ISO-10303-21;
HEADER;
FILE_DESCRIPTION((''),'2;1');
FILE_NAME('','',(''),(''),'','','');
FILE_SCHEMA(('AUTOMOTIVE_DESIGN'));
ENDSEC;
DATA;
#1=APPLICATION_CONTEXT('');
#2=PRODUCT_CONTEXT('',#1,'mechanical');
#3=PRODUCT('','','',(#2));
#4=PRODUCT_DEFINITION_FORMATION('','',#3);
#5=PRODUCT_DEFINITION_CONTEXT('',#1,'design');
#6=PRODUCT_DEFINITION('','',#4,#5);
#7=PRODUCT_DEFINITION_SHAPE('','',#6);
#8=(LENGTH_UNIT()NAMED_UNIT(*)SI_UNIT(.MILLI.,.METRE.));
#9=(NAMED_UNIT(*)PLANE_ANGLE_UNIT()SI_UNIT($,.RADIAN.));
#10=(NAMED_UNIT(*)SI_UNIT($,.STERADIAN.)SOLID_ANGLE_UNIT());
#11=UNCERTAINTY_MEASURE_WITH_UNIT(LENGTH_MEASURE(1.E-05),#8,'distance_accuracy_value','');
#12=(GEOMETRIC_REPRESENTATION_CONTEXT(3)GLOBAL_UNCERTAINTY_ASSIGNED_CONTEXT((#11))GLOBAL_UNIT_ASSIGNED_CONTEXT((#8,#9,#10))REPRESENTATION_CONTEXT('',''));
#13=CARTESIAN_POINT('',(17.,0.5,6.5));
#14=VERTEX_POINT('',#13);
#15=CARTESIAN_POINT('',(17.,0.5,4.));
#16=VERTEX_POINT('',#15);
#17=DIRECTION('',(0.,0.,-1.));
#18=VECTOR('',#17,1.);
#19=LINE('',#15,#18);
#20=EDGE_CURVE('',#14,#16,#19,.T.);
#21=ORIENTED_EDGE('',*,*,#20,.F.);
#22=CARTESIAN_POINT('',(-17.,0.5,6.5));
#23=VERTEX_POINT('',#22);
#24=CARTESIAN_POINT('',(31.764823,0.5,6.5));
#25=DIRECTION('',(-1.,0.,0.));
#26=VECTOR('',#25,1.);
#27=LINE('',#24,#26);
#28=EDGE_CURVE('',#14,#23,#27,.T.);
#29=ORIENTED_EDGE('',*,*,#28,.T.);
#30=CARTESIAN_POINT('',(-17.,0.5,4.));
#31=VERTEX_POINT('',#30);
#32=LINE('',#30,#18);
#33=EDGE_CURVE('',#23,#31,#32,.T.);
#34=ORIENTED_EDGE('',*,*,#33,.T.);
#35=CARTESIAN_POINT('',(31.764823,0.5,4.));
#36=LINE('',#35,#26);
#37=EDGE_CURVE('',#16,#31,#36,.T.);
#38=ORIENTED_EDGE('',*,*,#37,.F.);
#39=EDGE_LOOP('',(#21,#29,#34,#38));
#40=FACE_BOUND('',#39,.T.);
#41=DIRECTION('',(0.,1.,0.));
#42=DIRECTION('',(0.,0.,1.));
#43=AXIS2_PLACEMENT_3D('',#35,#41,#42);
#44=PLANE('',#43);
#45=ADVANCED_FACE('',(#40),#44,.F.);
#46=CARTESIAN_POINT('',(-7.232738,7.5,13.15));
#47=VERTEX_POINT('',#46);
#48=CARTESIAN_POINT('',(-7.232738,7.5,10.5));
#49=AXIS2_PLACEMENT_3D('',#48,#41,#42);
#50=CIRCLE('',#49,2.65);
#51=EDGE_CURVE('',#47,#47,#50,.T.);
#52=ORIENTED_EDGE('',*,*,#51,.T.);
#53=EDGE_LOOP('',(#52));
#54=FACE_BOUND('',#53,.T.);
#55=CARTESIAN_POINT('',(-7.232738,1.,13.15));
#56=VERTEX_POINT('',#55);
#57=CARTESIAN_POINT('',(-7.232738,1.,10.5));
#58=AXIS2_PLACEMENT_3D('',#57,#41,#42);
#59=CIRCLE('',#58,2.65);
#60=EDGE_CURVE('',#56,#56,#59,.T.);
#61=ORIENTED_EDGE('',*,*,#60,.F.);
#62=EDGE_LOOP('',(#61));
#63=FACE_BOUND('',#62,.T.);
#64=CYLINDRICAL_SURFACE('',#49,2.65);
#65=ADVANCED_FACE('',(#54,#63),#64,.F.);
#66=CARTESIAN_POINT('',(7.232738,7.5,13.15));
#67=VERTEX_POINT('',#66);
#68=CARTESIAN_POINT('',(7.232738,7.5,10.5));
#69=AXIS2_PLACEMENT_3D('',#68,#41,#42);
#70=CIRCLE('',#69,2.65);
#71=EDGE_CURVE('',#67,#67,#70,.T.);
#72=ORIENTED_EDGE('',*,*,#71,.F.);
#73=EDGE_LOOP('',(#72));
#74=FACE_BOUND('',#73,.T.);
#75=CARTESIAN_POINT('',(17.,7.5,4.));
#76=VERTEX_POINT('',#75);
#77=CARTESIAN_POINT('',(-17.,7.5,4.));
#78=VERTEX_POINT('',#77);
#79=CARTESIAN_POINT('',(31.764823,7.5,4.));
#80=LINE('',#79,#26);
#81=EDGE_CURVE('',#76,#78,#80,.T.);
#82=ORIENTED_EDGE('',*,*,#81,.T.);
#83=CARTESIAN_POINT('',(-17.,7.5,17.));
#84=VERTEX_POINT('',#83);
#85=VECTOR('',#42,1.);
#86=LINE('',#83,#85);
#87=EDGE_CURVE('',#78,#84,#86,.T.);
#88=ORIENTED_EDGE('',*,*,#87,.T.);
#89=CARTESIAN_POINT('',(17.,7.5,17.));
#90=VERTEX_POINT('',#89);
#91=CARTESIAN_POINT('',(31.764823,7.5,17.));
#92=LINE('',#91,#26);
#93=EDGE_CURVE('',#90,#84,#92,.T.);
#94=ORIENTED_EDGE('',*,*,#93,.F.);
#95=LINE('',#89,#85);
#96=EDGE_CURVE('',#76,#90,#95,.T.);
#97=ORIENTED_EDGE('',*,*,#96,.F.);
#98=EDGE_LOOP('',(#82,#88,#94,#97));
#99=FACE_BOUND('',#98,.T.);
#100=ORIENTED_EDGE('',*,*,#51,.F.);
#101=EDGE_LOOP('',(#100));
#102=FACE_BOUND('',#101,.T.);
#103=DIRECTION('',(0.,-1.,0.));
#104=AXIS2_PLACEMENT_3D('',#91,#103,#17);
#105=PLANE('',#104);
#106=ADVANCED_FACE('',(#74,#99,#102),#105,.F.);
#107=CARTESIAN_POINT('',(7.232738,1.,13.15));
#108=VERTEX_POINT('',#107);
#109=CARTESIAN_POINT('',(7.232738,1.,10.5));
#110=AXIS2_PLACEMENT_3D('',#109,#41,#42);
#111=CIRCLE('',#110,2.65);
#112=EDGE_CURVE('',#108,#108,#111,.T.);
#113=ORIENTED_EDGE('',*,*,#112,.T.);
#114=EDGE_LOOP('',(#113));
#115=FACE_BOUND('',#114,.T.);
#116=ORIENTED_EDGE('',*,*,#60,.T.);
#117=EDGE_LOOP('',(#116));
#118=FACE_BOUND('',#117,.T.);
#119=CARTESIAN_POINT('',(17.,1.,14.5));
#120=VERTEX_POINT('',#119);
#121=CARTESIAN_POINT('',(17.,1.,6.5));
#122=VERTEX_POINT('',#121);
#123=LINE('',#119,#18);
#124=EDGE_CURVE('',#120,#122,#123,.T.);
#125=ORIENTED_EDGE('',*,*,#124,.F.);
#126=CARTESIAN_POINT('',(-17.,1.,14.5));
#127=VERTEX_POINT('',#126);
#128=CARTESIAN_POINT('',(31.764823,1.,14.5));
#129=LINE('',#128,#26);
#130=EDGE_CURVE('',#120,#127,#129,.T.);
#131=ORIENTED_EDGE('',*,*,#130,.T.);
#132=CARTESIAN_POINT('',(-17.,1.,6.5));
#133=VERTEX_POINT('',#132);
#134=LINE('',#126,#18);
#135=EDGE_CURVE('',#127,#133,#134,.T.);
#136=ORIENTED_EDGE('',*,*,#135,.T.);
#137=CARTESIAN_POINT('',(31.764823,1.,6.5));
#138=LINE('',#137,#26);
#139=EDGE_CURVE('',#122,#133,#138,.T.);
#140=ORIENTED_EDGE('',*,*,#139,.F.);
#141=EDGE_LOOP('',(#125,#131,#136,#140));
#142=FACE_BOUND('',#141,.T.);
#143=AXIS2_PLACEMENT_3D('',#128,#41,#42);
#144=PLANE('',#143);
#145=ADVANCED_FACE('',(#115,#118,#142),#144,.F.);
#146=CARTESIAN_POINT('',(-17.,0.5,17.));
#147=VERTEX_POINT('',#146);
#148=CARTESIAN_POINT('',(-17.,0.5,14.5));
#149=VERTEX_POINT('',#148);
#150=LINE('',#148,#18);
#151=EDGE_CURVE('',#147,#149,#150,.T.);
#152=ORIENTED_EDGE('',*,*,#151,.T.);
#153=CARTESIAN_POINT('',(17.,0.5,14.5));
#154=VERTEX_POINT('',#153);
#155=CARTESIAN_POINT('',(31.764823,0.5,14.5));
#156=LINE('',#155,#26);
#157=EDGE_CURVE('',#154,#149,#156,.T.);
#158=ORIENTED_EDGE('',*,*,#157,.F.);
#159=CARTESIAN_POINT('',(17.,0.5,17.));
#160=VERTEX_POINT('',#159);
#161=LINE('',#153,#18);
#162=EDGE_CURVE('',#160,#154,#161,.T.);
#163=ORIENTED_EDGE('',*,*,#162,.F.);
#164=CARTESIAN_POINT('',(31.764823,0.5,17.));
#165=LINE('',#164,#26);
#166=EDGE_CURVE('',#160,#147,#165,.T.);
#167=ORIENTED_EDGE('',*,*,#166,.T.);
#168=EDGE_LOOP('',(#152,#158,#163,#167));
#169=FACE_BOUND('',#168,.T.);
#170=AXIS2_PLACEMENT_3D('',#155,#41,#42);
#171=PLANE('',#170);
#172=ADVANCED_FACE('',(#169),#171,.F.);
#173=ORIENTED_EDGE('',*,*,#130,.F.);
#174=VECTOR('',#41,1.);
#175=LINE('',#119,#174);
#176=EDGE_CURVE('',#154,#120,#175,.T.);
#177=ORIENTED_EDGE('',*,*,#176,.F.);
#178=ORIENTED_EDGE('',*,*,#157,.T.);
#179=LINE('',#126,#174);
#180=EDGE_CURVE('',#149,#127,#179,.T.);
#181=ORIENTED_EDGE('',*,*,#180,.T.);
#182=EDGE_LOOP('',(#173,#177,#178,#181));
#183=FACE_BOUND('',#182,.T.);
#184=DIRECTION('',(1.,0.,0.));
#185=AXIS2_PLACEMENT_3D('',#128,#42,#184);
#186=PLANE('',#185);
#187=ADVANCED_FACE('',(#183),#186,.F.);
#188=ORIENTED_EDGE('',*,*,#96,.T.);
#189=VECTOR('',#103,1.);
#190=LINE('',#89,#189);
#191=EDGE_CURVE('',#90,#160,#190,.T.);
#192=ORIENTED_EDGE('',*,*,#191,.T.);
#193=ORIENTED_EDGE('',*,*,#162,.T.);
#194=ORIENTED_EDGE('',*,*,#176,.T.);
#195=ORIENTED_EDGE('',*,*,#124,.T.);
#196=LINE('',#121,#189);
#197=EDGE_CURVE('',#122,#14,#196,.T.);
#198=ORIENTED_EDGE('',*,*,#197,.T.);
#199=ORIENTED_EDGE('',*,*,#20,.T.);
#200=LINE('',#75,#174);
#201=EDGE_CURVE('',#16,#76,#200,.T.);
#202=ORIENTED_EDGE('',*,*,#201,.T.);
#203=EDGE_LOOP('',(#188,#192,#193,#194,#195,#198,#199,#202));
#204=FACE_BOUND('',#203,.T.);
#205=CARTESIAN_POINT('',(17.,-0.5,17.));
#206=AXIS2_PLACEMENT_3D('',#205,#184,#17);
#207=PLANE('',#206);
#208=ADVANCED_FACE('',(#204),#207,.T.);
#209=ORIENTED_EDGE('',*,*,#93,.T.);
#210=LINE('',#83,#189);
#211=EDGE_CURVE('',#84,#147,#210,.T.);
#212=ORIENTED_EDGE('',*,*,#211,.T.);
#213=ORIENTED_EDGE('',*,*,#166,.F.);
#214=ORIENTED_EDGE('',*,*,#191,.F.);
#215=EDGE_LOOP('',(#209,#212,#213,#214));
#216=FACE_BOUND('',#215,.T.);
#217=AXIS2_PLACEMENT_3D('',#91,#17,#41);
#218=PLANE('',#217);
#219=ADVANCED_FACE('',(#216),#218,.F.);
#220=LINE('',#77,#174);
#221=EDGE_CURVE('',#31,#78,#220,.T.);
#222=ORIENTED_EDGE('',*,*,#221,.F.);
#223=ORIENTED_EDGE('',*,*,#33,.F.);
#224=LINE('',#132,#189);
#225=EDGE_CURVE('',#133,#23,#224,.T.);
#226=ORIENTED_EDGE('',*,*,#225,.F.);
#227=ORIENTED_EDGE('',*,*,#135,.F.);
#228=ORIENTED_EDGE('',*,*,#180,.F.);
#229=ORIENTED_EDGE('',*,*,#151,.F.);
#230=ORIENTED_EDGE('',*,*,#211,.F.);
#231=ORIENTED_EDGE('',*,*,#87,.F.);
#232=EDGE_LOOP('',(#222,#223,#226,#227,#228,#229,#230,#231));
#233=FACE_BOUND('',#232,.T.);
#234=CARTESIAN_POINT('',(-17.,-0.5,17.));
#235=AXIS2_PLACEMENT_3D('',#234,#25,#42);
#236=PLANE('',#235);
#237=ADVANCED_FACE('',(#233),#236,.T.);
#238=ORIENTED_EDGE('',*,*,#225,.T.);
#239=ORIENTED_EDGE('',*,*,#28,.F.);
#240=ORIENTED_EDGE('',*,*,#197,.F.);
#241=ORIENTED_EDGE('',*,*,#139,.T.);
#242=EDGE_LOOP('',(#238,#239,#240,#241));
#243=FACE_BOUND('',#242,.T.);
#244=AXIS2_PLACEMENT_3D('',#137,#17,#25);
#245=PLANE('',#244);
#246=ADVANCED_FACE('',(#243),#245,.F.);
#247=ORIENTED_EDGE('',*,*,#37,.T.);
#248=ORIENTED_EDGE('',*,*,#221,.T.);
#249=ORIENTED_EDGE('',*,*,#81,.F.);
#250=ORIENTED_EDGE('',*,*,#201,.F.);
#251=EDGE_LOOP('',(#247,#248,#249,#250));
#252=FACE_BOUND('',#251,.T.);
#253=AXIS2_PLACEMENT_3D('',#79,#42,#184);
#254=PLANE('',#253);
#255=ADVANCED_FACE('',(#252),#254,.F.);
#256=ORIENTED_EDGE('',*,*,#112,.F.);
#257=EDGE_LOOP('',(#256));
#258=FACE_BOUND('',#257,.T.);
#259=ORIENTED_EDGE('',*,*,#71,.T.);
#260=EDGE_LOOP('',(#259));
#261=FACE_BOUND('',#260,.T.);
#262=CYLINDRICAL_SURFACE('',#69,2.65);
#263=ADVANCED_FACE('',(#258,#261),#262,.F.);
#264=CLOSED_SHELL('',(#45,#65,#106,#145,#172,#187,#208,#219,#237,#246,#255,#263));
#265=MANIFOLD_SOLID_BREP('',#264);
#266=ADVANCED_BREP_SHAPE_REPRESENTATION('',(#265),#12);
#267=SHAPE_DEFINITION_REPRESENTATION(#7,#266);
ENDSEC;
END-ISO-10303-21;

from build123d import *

# Parameters (mm, degrees)
BOSS_EXTRUDE1_DEPTH             = 16
SKETCH2_W                       = 34
SKETCH2_H                       = 8
CUT_EXTRUDE1_DEPTH              = 0.5
SKETCH7_R                       = 8.5
CUT_EXTRUDE2_DEPTH              = 2
BOSS_EXTRUDE2_DEPTH             = 3
BOSS_EXTRUDE3_REACH             = 31.159
BOSS_EXTRUDE3_DIRECTION_2_REACH = 31.159
SKETCH11_W                      = 2.65
SKETCH11_H                      = 24
M5_CLEARANCE_HOLE2_AT_2_COUNT   = 2
M5_CLEARANCE_HOLE2_AT_2_PITCH   = 25.394250395
M5_CLEARANCE_HOLE2_AT_3_COUNT   = 2
M5_CLEARANCE_HOLE2_AT_3_PITCH   = 19.596880573
M5_CLEARANCE_HOLE2_AT_4_COUNT   = 2
M5_CLEARANCE_HOLE2_AT_4_PITCH   = 14.465476141
MOVE_FACE1_BY                   = 0.5
FILLET1_R                       = 0.4
CHAMFER1_SIZE                   = 0.6
FILLET2_R                       = 0.2


# Read off the part's stored shape, not the designer's step: M4 Tapped Hole2
with BuildPart() as part:
    # Sketch1 → Boss-Extrude1 (new body)
    with BuildSketch(Plane(origin=(0, -16.5, 0), x_dir=(-1, 0, 0), z_dir=(0, -1, 0))):
        with BuildLine():
            Line((17, -17), (-17, -17))
            Line((-17, -17), (-17, 0))
            ThreePointArc((-17, 0), (0, 17), (17, 0))
            Line((17, 0), (17, -17))
        make_face()
    extrude(amount=-BOSS_EXTRUDE1_DEPTH)

    # Sketch2 → Cut-Extrude1 (cut)
    with BuildSketch(Plane(origin=(0, -0.5, 0), x_dir=(1, 0, 0), z_dir=(0, 1, 0))):
        with Locations((0, -10.5)):
            Rectangle(SKETCH2_W, SKETCH2_H)
    extrude(amount=-CUT_EXTRUDE1_DEPTH, mode=Mode.SUBTRACT)

    # Sketch7 → Cut-Extrude2 (cut)
    with BuildSketch(Plane.XZ.offset(16.5)):
        with Locations(Location((0, 0, 0), (0, 0, 270))):
            Circle(SKETCH7_R)
    extrude(amount=-CUT_EXTRUDE2_DEPTH, mode=Mode.SUBTRACT)

    # Sketch8 → Boss-Extrude2 (add)
    with BuildSketch(Plane(origin=(0, -0.5, 0), x_dir=(1, 0, 0), z_dir=(0, 1, 0))):
        with BuildLine():
            Line((-17, -4), (17, -4))
            Line((17, -4), (17, 0))
            ThreePointArc((17, 0), (0, 17), (-17, 0))
            Line((-17, 0), (-17, -4))
        make_face()
    extrude(amount=BOSS_EXTRUDE2_DEPTH)


with BuildPart() as body_2:

    # Boss-Extrude3: up to this face of the body (flat: up to its plane)
    boss_extrude3_end = Plane(part.part.faces().sort_by_distance((17, -8.203571429, 8.192857143))[0])
    # Sketch9 → Boss-Extrude3 (new, up to the picked face)
    with BuildSketch(Plane(origin=(0, 0, 0), x_dir=(0, 0, -1), z_dir=(1, 0, 0)), mode=Mode.PRIVATE) as boss_extrude3_sk1:
        Polygon((-14.5, 1), (-14.5, 0.5), (-17, 0.5), (-17, 7.5), (-4, 7.5), (-4, 0.5), (-6.5, 0.5), (-6.5, 1), align=None)
    boss_extrude3_tool1 = split(extrude(boss_extrude3_sk1.sketch, amount=BOSS_EXTRUDE3_REACH, mode=Mode.PRIVATE), bisect_by=boss_extrude3_end, keep=Keep.BOTH, mode=Mode.PRIVATE)
    add(boss_extrude3_tool1.solids().sort_by(Axis((0, 4.149425, 10.5), (1, 0, 0)))[0])


    # Boss-Extrude3 direction 2: up to this face of the body (flat: up to its plane)
    boss_extrude3_direction_2_end = Plane(part.part.faces().sort_by_distance((-17, -8.203571429, 8.192857143))[0])
    # Sketch9 → Boss-Extrude3 direction 2 (add, up to the picked face)
    with BuildSketch(Plane(origin=(0, 0, 0), x_dir=(0, 0, -1), z_dir=(1, 0, 0)), mode=Mode.PRIVATE) as boss_extrude3_direction_2_sk1:
        Polygon((-14.5, 1), (-14.5, 0.5), (-17, 0.5), (-17, 7.5), (-4, 7.5), (-4, 0.5), (-6.5, 0.5), (-6.5, 1), align=None)
    boss_extrude3_direction_2_tool1 = split(extrude(boss_extrude3_direction_2_sk1.sketch, amount=-BOSS_EXTRUDE3_DIRECTION_2_REACH, mode=Mode.PRIVATE), bisect_by=boss_extrude3_direction_2_end, keep=Keep.BOTH, mode=Mode.PRIVATE)
    add(boss_extrude3_direction_2_tool1.solids().sort_by(Axis((0, 4.149425, 10.5), (-1, 0, 0)))[0])


with BuildPart() as m5_clearance_hole2_tool:
    # Sketch11 → M5 Clearance Hole2 (revolve)
    with BuildSketch(Plane(origin=(7.232738071, 7.5, 10.5), x_dir=(0, 0, 1), z_dir=(1, 0, 0))):
        with Locations((1.325, 12)):
            Rectangle(SKETCH11_W, SKETCH11_H)
    m5_clearance_hole2 = revolve(axis=Axis((7.232738071, 13.85, 10.5), (0, -1, 0)))


with BuildPart() as part_1:
    add(part.part)

    # M5 Clearance Hole2: cut by m5_clearance_hole2_tool
    add(m5_clearance_hole2_tool.part, mode=Mode.SUBTRACT)

    # M5 Clearance Hole2 at 2: M5 Clearance Hole2 ×2
    with Locations(*[Vector(-0.6398436369623559, 0, -0.768505120502645) * (i * M5_CLEARANCE_HOLE2_AT_2_PITCH) for i in range(1, M5_CLEARANCE_HOLE2_AT_2_COUNT)]):
        add(m5_clearance_hole2, mode=Mode.SUBTRACT)

    # M5 Clearance Hole2 at 3: M5 Clearance Hole2 ×2
    with Locations(*[Vector(0.09097740748886189, 0, -0.9958529566791503) * (i * M5_CLEARANCE_HOLE2_AT_3_PITCH) for i in range(1, M5_CLEARANCE_HOLE2_AT_3_COUNT)]):
        add(m5_clearance_hole2, mode=Mode.SUBTRACT)


with BuildPart() as body_2_1:
    add(body_2.part)

    # M5 Clearance Hole2: cut by m5_clearance_hole2_tool
    add(m5_clearance_hole2_tool.part, mode=Mode.SUBTRACT)


with BuildPart() as m5_clearance_hole2_at_4_tool:
    # M5 Clearance Hole2 at 4: M5 Clearance Hole2 ×2
    with Locations(*[(-i * M5_CLEARANCE_HOLE2_AT_4_PITCH, 0, 0) for i in range(1, M5_CLEARANCE_HOLE2_AT_4_COUNT)]):
        add(m5_clearance_hole2)


with BuildPart() as part_2:
    add(part_1.part)

    # M5 Clearance Hole2 at 4: cut by m5_clearance_hole2_at_4_tool
    add(m5_clearance_hole2_at_4_tool.part, mode=Mode.SUBTRACT)

    # M4 Tapped Hole2 outline → M4 Tapped Hole2 (revolve, cut)
    with BuildSketch(Plane(origin=(0, -3.5, 5), x_dir=(0, 1, 0), z_dir=(0, 0, -1))):
        Polygon((0, 17), (0, 5.908579979), (1.65, 6.9), (1.65, 17), align=None)
        Polygon((1.65, -6.9), (0, -5.908579979), (0, -17), (1.65, -17), align=None)
    revolve(axis=Axis((0, -3.5, 5), (1, 0, 0)), mode=Mode.SUBTRACT)

    # M4 Tapped Hole2 2 outline → M4 Tapped Hole2 2 (revolve, cut)
    with BuildSketch(Plane(origin=(0, -11.5, 5), x_dir=(0, 1, 0), z_dir=(0, 0, -1))):
        Polygon((0, 17), (0, 5.908579979), (1.65, 6.9), (1.65, 17), align=None)
        Polygon((1.65, -6.9), (0, -5.908579979), (0, -17), (1.65, -17), align=None)
    revolve(axis=Axis((0, -11.5, 5), (1, 0, 0)), mode=Mode.SUBTRACT)

    # Move Face1: a face moved inward by 0.5
    extrude(part_2.faces().sort_by_distance((0, -14.5, 0))[0], amount=MOVE_FACE1_BY, dir=(0, 1, 0), mode=Mode.SUBTRACT)

    # Fillet1
    fillet1_edges = [part_2.edges().sort_by_distance(p)[0] for p in [
        (0, -14, 8.5),
    ]]
    fillet(fillet1_edges, radius=FILLET1_R)

    # Chamfer1
    chamfer1_edges = [part_2.edges().sort_by_distance(p)[0] for p in [
        (0, -16.5, 8.5),
    ]]
    chamfer(chamfer1_edges, length=CHAMFER1_SIZE)

    # Fillet2
    fillet2_edges = [part_2.edges().sort_by_distance(p)[0] for p in [
        (0, -0.5, 4),
    ]]
    fillet(fillet2_edges, radius=FILLET2_R)


with BuildPart() as body_2_2:
    add(body_2_1.part)

    # M5 Clearance Hole2 at 4: cut by m5_clearance_hole2_at_4_tool
    add(m5_clearance_hole2_at_4_tool.part, mode=Mode.SUBTRACT)


solid = body_2_2.part
